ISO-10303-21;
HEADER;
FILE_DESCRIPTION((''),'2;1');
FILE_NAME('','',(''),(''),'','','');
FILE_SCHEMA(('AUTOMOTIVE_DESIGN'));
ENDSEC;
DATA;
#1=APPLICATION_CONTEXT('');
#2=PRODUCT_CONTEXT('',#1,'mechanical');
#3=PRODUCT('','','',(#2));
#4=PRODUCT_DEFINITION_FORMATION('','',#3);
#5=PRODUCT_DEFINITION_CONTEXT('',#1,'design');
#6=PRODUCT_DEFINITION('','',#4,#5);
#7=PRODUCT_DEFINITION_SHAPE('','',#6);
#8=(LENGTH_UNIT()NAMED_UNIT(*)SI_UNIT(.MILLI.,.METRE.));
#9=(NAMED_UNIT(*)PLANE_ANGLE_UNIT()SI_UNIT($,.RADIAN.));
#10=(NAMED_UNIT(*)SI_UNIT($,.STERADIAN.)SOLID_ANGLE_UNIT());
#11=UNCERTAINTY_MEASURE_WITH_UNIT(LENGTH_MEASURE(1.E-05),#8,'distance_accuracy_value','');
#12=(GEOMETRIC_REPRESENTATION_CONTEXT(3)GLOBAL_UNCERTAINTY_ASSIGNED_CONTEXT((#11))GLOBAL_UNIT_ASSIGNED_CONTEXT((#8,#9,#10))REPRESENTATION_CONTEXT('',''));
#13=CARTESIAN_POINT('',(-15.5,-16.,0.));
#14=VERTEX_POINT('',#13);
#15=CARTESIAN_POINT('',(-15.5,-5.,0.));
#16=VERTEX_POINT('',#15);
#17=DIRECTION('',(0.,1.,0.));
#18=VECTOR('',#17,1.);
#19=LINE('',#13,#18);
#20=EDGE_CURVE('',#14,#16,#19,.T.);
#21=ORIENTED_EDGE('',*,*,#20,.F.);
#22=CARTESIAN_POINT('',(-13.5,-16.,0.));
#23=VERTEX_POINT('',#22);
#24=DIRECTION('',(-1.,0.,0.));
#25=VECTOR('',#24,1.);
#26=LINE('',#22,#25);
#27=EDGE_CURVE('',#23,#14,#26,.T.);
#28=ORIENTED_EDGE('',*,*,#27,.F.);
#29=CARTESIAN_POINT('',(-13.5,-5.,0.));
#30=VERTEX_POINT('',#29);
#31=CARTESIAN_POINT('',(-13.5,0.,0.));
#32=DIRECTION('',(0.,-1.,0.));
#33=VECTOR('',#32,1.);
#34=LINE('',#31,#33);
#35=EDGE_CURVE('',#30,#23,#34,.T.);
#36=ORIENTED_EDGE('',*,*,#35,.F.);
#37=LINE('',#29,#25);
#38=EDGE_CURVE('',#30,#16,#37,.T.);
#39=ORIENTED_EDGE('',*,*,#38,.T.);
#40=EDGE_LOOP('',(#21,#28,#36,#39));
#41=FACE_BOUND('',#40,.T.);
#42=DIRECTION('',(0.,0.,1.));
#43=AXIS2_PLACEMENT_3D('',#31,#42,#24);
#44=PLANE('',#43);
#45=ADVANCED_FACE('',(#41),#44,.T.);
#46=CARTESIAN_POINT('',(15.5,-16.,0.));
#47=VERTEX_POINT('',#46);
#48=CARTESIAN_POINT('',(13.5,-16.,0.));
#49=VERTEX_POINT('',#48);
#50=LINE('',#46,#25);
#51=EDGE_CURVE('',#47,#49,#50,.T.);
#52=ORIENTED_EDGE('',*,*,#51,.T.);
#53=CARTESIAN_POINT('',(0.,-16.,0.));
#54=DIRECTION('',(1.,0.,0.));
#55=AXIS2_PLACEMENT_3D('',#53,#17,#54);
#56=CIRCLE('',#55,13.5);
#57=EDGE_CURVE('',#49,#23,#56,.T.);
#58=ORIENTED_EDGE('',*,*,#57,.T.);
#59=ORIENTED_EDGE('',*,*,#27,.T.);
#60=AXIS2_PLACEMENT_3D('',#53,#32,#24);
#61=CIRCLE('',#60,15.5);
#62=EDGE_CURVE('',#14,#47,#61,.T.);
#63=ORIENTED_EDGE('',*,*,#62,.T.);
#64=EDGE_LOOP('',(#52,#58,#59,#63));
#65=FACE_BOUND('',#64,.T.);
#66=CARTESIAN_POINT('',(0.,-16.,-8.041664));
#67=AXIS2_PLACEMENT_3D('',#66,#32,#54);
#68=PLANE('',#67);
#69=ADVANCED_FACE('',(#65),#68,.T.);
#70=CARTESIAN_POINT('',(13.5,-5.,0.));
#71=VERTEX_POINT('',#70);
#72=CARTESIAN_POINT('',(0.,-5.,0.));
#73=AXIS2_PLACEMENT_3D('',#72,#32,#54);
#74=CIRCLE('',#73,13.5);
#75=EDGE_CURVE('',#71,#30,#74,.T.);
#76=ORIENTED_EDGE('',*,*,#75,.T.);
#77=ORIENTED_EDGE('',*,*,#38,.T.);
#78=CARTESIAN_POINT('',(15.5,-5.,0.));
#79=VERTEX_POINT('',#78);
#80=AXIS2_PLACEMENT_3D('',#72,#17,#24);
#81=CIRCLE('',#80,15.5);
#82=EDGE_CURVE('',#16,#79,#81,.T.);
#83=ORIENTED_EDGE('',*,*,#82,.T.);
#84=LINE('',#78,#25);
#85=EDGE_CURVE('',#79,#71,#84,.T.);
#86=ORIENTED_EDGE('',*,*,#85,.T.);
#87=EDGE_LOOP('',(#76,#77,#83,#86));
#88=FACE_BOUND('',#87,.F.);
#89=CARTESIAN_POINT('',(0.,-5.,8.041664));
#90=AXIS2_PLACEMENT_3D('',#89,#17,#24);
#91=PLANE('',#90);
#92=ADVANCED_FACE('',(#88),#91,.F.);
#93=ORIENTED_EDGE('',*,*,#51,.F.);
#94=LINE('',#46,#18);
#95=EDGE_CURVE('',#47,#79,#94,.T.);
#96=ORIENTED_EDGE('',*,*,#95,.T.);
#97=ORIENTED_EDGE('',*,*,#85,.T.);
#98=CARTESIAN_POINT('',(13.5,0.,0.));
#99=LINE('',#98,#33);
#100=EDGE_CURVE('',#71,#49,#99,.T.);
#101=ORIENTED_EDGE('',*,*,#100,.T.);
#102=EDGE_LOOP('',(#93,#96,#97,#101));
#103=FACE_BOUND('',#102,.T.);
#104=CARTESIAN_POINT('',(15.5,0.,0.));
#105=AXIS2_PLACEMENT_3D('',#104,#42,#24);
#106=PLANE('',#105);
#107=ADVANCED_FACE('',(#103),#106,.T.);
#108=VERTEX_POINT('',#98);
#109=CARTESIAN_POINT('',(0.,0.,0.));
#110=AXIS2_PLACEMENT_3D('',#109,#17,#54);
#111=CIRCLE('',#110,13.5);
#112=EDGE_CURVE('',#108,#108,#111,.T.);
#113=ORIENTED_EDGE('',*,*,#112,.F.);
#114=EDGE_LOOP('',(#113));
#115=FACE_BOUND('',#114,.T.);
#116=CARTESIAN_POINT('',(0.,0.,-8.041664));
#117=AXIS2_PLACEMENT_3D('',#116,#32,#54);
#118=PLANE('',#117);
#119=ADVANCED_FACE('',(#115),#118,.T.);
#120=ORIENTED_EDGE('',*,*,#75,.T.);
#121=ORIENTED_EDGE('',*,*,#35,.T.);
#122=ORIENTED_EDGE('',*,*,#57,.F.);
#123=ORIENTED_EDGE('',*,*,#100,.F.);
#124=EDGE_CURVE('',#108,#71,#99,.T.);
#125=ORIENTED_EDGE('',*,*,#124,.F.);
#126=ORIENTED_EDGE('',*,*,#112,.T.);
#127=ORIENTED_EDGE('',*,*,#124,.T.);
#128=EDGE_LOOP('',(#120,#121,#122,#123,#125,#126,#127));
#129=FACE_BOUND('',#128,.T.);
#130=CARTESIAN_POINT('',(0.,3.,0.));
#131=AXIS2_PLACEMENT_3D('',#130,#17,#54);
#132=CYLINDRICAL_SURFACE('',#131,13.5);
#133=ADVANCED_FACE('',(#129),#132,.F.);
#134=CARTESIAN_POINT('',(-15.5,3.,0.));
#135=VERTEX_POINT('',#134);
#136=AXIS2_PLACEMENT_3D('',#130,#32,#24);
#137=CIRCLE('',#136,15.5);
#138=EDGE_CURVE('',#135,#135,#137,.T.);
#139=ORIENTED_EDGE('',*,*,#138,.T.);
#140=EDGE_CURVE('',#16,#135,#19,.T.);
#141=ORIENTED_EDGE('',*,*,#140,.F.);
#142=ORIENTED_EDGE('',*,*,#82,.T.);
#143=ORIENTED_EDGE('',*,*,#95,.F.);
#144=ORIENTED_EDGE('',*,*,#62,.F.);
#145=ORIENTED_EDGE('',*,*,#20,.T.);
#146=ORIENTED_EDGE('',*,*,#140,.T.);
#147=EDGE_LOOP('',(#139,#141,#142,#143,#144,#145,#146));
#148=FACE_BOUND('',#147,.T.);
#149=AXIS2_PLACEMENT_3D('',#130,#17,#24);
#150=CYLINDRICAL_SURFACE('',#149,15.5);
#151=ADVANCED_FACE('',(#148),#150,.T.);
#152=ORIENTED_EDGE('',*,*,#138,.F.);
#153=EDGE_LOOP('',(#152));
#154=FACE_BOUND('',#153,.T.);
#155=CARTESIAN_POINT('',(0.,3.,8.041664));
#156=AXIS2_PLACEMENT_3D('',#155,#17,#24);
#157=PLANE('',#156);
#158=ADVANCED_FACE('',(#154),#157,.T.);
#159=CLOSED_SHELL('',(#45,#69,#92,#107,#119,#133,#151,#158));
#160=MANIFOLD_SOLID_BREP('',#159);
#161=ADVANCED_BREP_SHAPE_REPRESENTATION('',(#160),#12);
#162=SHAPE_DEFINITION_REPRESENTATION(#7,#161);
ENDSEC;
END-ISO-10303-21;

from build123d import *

# Parameters (mm, degrees)
F1_DEPTH = 16
F2_DEPTH = 3
F4_DEPTH = 8


with BuildPart() as f1:
    # F0 (on Front) → F1 (new body)
    with BuildSketch(Plane.XZ):
        with BuildLine():
            Line((15.5, 0), (13.5, 0))
            ThreePointArc((13.5, 0), (0, -13.5), (-13.5, 0))
            Line((-13.5, 0), (-15.5, 0))
            ThreePointArc((-15.5, 0), (0, -15.5), (15.5, 0))
        make_face()
    extrude(amount=F1_DEPTH)

    # F0 (on Front) → F2 (join)
    with BuildSketch(Plane.XZ):
        with BuildLine():
            Line((15.5, 0), (13.5, 0))
            ThreePointArc((13.5, 0), (0, -13.5), (-13.5, 0))
            Line((-13.5, 0), (-15.5, 0))
            ThreePointArc((-15.5, 0), (0, -15.5), (15.5, 0))
        make_face()
        with BuildLine():
            ThreePointArc((-13.5, 0), (0, -13.5), (13.5, 0))
            ThreePointArc((13.5, 0), (0, 13.5), (-13.5, 0))
        make_face()
    extrude(amount=-F2_DEPTH)

    # F3 (on face) → F4 (join)
    with BuildSketch(Plane(origin=(0, 3, 0), x_dir=(-1, 0, 0), z_dir=(0, 1, 0))):
        with BuildLine():
            Line((13.5, 0), (15.5, 0))
            ThreePointArc((15.5, 0), (0, 15.5), (-15.5, 0))
            Line((-15.5, 0), (-13.5, 0))
            ThreePointArc((-13.5, 0), (0, 13.5), (13.5, 0))
        make_face()
    extrude(amount=-F4_DEPTH)


solid = f1.part
